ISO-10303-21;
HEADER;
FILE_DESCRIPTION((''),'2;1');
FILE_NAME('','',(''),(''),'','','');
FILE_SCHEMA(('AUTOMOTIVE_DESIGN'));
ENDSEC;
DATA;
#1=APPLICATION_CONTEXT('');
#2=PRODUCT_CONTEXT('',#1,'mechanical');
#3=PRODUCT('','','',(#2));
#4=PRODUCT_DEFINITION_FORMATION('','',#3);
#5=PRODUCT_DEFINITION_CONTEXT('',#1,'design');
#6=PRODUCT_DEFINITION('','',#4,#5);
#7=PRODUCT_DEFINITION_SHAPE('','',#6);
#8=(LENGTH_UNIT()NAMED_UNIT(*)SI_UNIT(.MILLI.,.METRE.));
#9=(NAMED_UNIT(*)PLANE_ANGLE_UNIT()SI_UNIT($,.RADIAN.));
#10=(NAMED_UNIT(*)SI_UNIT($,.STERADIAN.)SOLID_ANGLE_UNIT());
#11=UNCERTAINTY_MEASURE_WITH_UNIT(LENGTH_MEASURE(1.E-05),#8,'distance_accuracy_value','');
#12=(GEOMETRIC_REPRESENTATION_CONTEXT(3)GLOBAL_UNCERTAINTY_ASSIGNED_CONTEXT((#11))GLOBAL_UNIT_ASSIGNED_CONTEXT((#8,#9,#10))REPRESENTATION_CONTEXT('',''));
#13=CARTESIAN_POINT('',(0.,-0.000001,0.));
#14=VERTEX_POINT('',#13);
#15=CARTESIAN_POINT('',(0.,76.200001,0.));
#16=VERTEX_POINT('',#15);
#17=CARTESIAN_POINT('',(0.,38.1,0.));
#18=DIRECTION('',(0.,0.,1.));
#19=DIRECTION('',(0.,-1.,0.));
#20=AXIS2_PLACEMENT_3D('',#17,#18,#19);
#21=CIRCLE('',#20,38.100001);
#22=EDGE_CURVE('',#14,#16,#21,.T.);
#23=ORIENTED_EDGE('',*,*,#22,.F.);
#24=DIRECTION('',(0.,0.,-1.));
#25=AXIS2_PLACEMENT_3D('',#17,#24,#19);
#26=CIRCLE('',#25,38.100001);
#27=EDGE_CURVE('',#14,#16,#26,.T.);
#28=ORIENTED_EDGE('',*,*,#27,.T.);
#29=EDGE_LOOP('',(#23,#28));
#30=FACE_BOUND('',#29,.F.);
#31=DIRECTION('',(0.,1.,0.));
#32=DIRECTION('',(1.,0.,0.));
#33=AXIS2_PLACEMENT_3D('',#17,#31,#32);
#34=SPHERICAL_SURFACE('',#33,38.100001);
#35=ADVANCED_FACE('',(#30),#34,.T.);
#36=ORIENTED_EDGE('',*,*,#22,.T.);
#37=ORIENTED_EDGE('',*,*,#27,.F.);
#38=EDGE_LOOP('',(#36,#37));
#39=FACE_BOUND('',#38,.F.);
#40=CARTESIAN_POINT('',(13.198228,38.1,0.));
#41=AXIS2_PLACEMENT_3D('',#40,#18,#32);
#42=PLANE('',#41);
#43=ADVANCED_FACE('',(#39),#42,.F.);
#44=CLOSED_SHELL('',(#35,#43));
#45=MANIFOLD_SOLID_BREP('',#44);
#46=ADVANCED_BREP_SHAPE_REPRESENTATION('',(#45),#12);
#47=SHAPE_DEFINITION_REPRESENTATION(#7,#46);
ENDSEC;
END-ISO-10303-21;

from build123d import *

# Parameters (mm, degrees)
F1_ANGLE = 180


# Not quite as in the source:
# - ends of sketch curves that miss each other by under 0.0002 mm in the source are joined


with BuildPart() as f1:
    # F0 (on Top) → F1 (revolve)
    with BuildSketch(Plane.XY):
        with BuildLine():
            ThreePointArc((0, -1.0028e-06), (38.1000010028, 38.1), (0, 76.2000010028))
            Line((0, 76.2000010028), (0, -1.0028e-06))
        make_face()
    revolve(axis=Axis((0, 38.1, 0), (0, -1, 0)), revolution_arc=F1_ANGLE)


solid = f1.part
